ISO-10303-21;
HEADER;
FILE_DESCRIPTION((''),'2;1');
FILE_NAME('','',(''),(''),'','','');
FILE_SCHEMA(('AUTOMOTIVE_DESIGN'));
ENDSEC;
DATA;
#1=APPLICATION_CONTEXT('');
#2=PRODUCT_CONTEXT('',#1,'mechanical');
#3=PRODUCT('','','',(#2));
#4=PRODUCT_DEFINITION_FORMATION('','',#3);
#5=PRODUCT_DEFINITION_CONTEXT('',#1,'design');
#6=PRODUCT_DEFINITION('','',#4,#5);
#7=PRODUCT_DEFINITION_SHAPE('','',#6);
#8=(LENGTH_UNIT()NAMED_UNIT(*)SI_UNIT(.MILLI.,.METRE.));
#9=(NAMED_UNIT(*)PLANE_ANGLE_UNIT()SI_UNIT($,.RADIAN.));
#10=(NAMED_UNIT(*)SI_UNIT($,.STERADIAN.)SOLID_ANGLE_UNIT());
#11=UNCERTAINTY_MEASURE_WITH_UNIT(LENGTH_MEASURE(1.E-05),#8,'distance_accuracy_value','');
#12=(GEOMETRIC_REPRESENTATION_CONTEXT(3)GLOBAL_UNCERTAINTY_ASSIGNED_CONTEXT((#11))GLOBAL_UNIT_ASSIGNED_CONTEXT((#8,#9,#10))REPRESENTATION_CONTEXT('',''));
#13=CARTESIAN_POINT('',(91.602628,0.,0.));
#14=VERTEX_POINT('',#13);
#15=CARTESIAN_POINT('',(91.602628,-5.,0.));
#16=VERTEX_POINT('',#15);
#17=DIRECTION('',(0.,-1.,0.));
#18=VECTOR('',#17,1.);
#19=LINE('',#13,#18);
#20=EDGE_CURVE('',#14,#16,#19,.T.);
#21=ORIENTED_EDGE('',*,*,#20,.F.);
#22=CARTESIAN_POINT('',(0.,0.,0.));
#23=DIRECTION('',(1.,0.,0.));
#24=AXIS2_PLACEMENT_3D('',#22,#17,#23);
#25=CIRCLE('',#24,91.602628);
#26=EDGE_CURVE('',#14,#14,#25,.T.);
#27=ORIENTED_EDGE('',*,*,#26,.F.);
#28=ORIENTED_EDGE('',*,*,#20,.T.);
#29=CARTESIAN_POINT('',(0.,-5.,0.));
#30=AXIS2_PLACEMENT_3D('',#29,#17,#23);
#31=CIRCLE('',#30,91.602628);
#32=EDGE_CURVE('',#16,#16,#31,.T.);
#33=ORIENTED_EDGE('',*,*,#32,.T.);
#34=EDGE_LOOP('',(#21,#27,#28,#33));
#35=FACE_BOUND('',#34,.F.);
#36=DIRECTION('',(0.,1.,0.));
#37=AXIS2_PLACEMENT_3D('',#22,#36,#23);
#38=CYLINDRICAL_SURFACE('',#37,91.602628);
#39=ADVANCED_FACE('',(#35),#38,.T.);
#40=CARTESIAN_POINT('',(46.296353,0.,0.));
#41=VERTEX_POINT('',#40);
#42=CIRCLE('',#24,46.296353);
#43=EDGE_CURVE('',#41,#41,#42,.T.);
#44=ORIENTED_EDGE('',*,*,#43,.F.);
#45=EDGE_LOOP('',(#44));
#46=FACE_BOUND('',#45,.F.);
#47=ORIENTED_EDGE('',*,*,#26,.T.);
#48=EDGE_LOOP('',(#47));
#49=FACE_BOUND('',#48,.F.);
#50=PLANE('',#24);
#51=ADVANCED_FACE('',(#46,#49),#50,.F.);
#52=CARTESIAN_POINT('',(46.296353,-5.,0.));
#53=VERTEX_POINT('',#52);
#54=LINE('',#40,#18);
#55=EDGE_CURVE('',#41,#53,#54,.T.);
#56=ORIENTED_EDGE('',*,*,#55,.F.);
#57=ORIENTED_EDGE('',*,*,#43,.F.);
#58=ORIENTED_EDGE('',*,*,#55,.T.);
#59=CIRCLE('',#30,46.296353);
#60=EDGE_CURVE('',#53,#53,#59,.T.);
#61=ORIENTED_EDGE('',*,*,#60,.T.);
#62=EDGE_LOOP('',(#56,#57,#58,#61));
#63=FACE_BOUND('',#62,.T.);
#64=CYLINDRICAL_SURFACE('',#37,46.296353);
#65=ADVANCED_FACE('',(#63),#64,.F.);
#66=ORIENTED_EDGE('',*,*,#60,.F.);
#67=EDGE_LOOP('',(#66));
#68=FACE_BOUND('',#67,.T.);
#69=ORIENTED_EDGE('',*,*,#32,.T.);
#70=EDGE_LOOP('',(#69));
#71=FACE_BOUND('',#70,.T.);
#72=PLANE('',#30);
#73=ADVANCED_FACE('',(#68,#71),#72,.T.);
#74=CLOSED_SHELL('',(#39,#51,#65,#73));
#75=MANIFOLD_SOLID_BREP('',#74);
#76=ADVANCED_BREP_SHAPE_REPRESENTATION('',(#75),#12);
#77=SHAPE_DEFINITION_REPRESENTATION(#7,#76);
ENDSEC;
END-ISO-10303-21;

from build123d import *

# Parameters (mm, degrees)
F0_R     = 91.60262799
F0_R_2   = 57.3129322619
F0_R_3   = 46.2963533707
F1_DEPTH = 5


# Not quite as in the source:
# - the program builds the solid bodies; features that only make, move or delete a surface that nothing else refers to are left out


with BuildPart() as f1:
    # F0 (on Front) → F1 (new body)
    with BuildSketch(Plane.XZ):
        Circle(F0_R)
        Circle(F0_R_2, mode=Mode.SUBTRACT)
        Circle(F0_R_2)
        Circle(F0_R_3, mode=Mode.SUBTRACT)
    extrude(amount=F1_DEPTH)


solid = f1.part
